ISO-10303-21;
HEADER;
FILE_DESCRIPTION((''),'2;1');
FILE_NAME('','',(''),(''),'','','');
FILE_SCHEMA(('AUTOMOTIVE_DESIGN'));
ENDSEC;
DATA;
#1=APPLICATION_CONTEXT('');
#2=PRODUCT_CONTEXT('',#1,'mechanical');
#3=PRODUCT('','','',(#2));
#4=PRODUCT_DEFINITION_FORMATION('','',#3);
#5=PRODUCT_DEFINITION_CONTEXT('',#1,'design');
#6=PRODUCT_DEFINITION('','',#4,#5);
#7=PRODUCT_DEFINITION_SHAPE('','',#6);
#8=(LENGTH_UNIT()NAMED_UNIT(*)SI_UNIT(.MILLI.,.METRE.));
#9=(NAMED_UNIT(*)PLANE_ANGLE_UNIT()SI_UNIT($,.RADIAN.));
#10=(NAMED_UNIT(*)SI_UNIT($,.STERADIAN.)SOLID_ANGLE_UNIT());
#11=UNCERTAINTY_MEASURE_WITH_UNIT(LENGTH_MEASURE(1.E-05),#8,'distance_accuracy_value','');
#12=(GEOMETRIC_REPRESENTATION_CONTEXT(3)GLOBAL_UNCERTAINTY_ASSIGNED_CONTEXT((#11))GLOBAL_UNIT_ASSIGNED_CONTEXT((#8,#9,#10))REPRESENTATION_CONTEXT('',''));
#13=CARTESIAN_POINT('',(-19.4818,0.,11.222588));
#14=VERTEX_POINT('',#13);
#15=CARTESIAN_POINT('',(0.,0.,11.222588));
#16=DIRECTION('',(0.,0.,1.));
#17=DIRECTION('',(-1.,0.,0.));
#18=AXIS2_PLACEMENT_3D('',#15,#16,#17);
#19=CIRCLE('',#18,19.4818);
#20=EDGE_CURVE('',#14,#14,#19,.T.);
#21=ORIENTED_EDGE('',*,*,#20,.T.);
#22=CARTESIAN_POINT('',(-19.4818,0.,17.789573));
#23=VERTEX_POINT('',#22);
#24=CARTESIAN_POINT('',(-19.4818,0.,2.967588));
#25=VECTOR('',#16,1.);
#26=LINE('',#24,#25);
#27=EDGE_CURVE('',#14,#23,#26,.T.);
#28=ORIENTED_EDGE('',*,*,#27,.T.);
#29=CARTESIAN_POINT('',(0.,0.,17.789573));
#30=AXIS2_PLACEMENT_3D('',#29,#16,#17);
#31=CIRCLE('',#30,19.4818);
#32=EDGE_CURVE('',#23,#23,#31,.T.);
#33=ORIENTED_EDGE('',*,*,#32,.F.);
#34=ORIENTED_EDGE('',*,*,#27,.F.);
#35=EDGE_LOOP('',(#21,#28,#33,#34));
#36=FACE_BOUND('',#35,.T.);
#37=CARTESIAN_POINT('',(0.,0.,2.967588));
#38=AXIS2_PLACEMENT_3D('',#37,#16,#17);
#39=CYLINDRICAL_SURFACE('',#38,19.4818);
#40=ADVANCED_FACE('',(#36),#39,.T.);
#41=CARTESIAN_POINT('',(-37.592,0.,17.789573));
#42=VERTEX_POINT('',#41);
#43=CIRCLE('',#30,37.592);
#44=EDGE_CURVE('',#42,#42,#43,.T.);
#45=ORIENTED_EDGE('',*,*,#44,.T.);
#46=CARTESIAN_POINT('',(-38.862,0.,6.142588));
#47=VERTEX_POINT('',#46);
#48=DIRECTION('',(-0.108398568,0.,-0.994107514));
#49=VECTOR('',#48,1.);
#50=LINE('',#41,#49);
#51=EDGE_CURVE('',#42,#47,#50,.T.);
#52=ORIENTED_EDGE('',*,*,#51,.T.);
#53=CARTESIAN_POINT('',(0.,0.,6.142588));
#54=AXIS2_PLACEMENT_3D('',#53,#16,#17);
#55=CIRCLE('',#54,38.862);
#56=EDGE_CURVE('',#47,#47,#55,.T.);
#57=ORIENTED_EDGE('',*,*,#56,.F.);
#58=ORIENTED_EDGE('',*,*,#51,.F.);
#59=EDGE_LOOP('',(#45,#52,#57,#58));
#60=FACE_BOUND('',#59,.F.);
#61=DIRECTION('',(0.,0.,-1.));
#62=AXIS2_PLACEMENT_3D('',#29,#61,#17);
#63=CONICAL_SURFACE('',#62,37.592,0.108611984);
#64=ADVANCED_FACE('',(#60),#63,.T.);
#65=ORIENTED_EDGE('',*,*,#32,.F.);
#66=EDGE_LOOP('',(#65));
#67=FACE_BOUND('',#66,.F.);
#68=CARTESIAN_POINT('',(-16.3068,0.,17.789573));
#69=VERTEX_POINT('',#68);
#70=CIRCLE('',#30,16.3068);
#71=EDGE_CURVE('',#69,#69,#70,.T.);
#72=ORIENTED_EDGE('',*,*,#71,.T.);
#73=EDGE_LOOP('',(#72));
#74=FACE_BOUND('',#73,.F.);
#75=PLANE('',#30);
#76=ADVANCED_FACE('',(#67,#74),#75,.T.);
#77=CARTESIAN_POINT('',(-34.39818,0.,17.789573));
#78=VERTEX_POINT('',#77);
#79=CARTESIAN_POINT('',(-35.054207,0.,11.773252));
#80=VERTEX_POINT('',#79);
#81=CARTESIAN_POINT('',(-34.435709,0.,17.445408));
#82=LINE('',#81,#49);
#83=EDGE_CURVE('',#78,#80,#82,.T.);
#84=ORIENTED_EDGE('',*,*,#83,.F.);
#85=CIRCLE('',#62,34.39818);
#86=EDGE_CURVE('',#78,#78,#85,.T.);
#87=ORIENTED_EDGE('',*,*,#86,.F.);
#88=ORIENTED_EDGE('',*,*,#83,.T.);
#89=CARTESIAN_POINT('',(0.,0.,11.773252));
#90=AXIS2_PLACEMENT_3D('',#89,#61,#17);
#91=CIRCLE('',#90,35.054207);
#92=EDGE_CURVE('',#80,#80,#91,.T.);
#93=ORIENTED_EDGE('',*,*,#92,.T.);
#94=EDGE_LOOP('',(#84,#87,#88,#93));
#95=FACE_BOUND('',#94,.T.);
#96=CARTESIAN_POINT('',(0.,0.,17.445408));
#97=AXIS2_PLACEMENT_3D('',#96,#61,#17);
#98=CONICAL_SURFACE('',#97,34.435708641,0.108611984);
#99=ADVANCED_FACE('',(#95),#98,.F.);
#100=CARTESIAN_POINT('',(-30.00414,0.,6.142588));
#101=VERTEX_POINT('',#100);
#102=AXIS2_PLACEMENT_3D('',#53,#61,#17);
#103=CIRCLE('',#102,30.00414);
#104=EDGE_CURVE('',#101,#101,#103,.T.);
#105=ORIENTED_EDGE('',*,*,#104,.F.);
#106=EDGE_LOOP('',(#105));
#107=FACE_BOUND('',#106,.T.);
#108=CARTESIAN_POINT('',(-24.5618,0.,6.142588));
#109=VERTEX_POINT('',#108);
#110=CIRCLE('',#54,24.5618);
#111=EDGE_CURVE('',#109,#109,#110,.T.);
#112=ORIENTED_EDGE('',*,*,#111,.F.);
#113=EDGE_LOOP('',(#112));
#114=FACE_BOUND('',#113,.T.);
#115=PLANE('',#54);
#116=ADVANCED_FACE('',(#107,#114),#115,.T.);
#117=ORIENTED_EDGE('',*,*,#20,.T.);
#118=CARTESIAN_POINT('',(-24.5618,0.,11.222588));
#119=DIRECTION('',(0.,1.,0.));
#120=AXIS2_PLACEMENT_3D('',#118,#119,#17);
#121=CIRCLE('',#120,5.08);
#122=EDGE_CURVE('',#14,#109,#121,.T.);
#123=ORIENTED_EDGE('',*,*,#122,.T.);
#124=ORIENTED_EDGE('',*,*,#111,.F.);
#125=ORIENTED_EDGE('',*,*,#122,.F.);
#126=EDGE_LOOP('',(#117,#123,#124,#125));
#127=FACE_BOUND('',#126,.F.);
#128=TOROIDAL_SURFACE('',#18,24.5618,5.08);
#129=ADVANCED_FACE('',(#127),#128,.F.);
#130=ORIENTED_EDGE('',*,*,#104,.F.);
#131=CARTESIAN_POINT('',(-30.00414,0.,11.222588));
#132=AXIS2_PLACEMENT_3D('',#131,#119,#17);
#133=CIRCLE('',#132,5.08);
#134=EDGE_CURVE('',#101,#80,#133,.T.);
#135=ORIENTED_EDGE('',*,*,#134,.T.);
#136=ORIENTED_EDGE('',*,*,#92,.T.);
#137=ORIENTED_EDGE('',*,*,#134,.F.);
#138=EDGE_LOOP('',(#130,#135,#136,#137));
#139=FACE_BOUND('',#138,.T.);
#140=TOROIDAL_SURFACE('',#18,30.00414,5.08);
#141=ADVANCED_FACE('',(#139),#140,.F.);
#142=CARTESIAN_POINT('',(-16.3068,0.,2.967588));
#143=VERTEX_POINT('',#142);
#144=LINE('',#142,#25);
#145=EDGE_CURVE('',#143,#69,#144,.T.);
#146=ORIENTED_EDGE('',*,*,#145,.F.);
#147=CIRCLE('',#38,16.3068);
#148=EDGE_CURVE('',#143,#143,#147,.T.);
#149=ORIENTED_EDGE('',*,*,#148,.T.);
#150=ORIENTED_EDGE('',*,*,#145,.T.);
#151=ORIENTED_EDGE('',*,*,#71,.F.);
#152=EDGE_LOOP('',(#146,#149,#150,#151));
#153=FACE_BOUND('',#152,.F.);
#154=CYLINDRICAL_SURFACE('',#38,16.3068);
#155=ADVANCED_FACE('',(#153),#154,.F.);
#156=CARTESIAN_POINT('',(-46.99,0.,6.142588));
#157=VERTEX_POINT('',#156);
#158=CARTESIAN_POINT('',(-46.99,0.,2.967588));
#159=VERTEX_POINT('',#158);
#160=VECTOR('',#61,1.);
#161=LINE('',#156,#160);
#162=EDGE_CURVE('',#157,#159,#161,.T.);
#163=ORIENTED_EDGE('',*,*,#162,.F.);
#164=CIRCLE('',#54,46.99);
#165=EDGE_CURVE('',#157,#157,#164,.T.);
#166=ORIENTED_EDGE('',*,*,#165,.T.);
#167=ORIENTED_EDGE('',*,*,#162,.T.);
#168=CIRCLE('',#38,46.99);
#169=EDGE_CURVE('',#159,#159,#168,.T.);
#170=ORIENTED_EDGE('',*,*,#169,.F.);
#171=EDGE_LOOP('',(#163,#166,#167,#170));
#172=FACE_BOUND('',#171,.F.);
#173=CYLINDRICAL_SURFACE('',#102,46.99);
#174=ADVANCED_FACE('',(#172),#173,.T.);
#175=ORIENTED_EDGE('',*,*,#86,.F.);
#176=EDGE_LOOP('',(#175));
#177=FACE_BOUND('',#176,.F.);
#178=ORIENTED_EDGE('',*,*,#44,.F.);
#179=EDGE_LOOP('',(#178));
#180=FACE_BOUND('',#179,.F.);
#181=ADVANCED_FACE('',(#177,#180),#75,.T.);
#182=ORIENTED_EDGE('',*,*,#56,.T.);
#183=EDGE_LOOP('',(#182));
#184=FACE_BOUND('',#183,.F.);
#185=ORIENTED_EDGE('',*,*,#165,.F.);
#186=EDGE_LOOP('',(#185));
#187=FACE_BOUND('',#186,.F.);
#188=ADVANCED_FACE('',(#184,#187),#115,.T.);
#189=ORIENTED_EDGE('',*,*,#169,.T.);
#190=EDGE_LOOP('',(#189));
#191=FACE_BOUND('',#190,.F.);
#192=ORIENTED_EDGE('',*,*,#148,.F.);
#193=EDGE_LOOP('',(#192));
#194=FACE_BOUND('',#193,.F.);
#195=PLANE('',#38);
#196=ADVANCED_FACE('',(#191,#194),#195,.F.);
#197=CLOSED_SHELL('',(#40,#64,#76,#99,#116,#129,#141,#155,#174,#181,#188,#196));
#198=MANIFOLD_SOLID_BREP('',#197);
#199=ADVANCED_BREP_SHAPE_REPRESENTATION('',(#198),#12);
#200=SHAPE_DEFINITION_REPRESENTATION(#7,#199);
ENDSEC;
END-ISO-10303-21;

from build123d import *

# Parameters (mm, degrees)
F2_T = -3.175
F3_R = 5.08
F4_R = 5.08


with BuildPart() as f1:
    # F0 (on Front) → F1 (revolve)
    with BuildSketch(Plane.XZ):
        Polygon((-16.3068, 2.9675877146), (-16.3068, 17.7895731165), (-37.592, 17.7895731165), (-38.862, 6.1425877146), (-46.99, 6.1425877146), (-46.99, 2.9675877146), align=None)
    revolve(axis=Axis((0, 0, 15.8357990333), (0, 0, 1)))

    # F2
    f2_openings = [f1.faces().sort_by_distance(p)[0] for p in [
        (17.370062, 0, 17.789573),
    ]]
    offset(amount=F2_T, openings=f2_openings)

    # F3
    f3_edges = [f1.edges().sort_by_distance(p)[0] for p in [
        (19.4818, 0, 6.142588),
    ]]
    fillet(f3_edges, radius=F3_R)

    # F4
    f4_edges = [f1.edges().sort_by_distance(p)[0] for p in [
        (35.66818, 0, 6.142588),
    ]]
    fillet(f4_edges, radius=F4_R)


solid = f1.part
